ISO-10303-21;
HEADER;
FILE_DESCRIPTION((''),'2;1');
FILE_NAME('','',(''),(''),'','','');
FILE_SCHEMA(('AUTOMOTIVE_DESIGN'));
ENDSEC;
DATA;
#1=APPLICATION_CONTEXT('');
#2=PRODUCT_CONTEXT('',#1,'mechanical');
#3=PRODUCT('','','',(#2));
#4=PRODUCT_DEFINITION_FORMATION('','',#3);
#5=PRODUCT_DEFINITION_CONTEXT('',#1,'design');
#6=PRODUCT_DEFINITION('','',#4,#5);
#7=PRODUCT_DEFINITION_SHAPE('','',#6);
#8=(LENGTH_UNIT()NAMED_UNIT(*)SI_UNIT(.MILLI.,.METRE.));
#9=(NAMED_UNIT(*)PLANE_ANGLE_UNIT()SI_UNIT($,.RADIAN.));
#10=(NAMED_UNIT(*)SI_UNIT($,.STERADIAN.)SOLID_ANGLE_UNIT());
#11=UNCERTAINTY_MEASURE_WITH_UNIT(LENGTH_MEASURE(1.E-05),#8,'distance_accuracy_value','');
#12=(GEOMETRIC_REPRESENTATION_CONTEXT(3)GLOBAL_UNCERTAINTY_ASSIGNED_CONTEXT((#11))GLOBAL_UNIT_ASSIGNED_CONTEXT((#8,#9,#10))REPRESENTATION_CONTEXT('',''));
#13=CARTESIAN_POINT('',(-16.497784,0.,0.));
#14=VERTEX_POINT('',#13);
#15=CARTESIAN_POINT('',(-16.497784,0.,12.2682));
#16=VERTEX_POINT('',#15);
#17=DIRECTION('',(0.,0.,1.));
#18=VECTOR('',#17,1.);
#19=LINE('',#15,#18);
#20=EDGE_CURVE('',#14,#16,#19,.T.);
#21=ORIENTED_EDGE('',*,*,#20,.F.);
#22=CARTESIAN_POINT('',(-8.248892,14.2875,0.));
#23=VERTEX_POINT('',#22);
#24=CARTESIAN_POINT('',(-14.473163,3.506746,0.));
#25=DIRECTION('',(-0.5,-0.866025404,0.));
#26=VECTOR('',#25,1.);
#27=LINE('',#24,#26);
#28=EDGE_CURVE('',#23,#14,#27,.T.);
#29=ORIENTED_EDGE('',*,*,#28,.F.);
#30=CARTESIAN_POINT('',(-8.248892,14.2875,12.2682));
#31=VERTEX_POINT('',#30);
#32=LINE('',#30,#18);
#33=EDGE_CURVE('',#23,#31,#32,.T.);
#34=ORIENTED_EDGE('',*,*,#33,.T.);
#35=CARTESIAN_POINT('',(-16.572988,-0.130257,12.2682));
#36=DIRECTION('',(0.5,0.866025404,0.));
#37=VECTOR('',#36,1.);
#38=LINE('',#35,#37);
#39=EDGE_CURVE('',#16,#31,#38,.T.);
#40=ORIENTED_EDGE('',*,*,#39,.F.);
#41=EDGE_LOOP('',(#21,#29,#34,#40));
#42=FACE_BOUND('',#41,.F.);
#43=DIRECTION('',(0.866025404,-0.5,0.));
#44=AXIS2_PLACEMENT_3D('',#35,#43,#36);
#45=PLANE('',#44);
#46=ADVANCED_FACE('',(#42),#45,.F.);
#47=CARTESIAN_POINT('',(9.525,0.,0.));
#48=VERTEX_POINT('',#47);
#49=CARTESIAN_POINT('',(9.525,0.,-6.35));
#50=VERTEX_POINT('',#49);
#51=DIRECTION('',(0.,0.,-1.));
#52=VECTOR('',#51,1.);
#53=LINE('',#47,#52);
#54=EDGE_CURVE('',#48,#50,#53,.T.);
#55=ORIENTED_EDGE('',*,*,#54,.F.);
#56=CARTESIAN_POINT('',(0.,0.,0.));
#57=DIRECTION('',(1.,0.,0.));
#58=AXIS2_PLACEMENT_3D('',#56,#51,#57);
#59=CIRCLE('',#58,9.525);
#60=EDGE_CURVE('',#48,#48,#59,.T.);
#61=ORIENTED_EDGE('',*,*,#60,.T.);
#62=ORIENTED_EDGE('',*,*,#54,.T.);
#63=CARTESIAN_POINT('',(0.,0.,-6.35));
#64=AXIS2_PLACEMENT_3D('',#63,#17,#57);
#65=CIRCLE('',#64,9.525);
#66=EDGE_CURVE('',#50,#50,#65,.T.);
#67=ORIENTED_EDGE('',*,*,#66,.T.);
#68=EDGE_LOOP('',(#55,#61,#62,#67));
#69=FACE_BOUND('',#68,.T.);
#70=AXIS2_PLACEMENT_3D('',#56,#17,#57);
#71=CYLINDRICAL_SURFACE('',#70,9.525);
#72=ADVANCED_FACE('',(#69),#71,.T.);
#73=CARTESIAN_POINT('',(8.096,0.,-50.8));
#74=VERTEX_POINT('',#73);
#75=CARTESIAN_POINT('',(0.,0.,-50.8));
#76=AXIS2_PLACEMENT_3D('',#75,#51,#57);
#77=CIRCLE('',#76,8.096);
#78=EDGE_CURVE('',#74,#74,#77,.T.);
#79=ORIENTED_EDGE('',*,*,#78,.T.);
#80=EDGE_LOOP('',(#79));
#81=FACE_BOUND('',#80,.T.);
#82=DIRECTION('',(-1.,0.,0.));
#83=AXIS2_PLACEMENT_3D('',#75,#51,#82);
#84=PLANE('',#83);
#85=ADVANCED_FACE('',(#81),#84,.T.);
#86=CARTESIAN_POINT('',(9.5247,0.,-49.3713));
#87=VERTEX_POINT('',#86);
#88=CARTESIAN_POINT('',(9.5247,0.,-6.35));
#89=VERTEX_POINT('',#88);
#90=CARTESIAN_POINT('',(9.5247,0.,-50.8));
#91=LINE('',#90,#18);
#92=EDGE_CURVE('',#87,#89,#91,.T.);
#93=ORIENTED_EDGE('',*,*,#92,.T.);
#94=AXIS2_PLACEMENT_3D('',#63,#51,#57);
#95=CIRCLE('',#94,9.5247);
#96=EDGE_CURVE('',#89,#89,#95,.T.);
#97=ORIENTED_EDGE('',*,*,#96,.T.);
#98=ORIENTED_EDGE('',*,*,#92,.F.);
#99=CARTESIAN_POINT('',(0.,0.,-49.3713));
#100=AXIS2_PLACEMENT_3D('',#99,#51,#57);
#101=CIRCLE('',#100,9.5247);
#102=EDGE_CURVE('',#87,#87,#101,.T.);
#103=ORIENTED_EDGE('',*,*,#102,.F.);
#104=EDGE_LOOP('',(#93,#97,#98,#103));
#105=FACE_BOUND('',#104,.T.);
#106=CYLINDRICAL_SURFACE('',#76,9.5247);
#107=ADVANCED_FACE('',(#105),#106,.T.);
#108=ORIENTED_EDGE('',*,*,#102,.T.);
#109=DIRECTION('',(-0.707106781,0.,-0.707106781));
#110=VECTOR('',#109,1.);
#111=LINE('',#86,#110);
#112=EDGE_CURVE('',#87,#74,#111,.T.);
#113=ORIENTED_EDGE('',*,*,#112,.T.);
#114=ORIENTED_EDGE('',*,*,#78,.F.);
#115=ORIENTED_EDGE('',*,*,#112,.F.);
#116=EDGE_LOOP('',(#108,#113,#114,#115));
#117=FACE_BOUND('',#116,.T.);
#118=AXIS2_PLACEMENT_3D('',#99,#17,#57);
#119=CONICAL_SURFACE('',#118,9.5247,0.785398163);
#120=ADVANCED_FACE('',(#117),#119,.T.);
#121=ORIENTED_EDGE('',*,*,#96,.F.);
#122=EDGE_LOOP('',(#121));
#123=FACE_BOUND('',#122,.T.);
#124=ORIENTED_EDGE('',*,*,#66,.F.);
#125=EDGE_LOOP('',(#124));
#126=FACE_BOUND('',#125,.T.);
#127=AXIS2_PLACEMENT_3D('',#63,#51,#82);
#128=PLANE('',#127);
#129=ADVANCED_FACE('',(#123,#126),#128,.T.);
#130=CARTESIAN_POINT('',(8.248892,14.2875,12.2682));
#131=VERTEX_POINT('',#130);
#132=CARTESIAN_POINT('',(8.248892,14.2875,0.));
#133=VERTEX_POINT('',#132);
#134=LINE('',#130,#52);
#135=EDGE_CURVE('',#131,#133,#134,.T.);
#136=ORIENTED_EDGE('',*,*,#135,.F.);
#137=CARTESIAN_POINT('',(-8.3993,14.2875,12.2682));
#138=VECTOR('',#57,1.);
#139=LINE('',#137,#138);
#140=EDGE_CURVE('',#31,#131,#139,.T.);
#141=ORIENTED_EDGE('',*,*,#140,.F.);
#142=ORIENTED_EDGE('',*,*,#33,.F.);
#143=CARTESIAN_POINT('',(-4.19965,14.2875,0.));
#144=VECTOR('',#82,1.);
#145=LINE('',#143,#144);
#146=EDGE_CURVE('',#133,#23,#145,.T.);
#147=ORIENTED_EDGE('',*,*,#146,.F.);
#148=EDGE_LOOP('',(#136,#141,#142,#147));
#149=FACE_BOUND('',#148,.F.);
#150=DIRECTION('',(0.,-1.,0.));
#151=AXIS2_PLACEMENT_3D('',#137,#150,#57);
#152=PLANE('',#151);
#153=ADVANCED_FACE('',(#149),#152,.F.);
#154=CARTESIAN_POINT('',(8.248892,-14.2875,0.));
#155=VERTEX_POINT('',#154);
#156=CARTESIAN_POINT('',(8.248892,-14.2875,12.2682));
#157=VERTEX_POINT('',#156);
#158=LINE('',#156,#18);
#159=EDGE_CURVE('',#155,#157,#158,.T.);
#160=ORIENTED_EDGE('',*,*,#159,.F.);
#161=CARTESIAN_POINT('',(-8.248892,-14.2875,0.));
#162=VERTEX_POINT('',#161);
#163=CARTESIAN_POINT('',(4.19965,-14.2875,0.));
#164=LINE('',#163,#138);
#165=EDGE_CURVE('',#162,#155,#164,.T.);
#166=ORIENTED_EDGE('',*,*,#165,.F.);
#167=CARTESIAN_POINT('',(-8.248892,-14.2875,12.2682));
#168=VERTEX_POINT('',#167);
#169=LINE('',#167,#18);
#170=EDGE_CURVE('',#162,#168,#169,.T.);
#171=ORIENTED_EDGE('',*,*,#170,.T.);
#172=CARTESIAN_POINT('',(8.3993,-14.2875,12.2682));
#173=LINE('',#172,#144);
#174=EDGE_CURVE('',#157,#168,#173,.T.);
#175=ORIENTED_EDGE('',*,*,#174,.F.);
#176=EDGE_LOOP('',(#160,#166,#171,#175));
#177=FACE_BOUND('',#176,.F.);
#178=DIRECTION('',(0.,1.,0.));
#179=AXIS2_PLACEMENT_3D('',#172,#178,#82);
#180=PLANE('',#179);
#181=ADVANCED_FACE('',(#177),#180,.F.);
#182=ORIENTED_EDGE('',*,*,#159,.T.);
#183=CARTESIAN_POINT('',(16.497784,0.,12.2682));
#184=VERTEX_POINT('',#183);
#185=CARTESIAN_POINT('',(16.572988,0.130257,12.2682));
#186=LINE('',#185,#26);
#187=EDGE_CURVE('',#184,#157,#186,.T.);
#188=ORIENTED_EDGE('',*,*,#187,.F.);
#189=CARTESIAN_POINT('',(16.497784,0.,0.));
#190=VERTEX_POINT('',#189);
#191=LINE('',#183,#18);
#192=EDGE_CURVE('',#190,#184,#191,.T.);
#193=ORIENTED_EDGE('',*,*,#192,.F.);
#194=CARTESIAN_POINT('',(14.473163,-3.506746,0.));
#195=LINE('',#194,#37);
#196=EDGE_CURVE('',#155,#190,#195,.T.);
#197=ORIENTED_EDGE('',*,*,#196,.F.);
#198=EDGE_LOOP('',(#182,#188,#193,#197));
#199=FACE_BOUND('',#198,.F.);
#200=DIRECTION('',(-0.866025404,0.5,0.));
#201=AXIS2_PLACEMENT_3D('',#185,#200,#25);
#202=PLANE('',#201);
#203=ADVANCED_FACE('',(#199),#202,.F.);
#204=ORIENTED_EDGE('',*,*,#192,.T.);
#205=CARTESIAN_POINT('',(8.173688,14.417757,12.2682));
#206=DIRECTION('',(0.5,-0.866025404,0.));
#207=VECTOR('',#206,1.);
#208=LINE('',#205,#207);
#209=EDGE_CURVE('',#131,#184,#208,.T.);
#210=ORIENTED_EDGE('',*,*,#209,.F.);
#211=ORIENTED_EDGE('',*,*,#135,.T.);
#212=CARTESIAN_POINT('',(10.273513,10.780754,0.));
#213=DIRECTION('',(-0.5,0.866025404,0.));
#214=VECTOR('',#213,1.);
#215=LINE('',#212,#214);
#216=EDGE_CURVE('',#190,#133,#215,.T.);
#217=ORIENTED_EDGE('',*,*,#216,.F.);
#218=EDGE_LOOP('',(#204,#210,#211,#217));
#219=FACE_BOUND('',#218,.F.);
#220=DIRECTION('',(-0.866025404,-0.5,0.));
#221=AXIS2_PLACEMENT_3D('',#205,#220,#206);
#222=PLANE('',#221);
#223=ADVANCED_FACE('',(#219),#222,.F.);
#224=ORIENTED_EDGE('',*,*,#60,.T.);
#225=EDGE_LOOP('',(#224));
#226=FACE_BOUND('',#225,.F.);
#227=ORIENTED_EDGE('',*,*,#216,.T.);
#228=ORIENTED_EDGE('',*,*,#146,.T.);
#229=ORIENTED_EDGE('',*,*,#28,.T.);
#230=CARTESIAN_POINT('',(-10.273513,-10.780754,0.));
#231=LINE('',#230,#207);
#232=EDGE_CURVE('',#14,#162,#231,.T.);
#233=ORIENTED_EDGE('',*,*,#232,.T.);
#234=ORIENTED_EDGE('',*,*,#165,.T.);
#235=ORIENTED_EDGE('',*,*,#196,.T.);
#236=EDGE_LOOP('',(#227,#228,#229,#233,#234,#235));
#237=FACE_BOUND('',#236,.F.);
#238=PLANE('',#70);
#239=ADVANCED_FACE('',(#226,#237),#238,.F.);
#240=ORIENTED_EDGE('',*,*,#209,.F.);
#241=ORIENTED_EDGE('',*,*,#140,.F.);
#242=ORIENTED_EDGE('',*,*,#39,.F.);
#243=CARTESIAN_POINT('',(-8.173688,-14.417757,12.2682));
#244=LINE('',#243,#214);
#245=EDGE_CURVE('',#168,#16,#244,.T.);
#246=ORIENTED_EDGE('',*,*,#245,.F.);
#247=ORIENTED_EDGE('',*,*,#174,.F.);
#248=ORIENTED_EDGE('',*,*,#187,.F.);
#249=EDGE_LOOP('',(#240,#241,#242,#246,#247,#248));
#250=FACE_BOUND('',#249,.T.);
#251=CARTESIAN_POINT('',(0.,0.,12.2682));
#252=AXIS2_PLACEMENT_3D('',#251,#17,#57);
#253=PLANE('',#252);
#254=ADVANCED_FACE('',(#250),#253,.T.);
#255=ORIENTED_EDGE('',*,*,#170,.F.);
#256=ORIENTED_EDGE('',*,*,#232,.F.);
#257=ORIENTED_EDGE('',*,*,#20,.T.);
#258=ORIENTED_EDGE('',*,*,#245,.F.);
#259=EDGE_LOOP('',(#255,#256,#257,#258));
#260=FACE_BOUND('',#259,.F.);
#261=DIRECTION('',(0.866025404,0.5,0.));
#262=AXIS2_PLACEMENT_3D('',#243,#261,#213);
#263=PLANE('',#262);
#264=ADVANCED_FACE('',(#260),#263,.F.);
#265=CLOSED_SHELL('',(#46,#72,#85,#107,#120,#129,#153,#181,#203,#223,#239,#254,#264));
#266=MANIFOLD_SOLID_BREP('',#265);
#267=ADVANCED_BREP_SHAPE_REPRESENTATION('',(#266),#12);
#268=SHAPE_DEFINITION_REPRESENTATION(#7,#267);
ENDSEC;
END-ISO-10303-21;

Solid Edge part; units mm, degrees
sketch "Sketch1" plane through (0, 0, 0) normal (0, 0, 1) x (1, 0, 0)
  circle A0 centre (0, 0) radius 16.5735
  dimension "D1" = 33.147
extrude "Protrusion1" add sketch "Sketch1" along normal blind 12.2682
sketch "Sketch2" plane through (0, 0, 0) normal (0, 0, -1) x (1, 0, 0)
  circle A0 centre (0, 0) radius 9.525
extrude "Protrusion2" add sketch "Sketch2" along normal blind 50.8
sketch "Sketch3" plane through (0, 0, -50.8) normal (0, 0, -1) x (1, 0, 0)
  circle A0 centre (0, 0) radius 9.5247
extrude "Cutout1" cut sketch "Sketch3" against normal blind 44.45 flip side to cut
chamfer "Chamfer_1" distance 1.4287 angle 45 1 edges at (-9.5247, 0, -50.8)
sketch "Sketch4" plane through (0, 0, 12.2682) normal (0, 0, 1) x (1, 0, 0)
  line L0 (-8.3993, 14.2875) -> (8.3993, 14.2875)
  dimension "D1" = 28.575
extrude "Cutout2" cut sketch "Sketch4" against normal up to next material side at (0, 14.3375, 12.2682)
pattern_circular "Pattern1" count 6 over 360 about axis through (0, 0, 12.2682) along (0, 0, 1) of "Cutout2"
properties part number "24102440"
